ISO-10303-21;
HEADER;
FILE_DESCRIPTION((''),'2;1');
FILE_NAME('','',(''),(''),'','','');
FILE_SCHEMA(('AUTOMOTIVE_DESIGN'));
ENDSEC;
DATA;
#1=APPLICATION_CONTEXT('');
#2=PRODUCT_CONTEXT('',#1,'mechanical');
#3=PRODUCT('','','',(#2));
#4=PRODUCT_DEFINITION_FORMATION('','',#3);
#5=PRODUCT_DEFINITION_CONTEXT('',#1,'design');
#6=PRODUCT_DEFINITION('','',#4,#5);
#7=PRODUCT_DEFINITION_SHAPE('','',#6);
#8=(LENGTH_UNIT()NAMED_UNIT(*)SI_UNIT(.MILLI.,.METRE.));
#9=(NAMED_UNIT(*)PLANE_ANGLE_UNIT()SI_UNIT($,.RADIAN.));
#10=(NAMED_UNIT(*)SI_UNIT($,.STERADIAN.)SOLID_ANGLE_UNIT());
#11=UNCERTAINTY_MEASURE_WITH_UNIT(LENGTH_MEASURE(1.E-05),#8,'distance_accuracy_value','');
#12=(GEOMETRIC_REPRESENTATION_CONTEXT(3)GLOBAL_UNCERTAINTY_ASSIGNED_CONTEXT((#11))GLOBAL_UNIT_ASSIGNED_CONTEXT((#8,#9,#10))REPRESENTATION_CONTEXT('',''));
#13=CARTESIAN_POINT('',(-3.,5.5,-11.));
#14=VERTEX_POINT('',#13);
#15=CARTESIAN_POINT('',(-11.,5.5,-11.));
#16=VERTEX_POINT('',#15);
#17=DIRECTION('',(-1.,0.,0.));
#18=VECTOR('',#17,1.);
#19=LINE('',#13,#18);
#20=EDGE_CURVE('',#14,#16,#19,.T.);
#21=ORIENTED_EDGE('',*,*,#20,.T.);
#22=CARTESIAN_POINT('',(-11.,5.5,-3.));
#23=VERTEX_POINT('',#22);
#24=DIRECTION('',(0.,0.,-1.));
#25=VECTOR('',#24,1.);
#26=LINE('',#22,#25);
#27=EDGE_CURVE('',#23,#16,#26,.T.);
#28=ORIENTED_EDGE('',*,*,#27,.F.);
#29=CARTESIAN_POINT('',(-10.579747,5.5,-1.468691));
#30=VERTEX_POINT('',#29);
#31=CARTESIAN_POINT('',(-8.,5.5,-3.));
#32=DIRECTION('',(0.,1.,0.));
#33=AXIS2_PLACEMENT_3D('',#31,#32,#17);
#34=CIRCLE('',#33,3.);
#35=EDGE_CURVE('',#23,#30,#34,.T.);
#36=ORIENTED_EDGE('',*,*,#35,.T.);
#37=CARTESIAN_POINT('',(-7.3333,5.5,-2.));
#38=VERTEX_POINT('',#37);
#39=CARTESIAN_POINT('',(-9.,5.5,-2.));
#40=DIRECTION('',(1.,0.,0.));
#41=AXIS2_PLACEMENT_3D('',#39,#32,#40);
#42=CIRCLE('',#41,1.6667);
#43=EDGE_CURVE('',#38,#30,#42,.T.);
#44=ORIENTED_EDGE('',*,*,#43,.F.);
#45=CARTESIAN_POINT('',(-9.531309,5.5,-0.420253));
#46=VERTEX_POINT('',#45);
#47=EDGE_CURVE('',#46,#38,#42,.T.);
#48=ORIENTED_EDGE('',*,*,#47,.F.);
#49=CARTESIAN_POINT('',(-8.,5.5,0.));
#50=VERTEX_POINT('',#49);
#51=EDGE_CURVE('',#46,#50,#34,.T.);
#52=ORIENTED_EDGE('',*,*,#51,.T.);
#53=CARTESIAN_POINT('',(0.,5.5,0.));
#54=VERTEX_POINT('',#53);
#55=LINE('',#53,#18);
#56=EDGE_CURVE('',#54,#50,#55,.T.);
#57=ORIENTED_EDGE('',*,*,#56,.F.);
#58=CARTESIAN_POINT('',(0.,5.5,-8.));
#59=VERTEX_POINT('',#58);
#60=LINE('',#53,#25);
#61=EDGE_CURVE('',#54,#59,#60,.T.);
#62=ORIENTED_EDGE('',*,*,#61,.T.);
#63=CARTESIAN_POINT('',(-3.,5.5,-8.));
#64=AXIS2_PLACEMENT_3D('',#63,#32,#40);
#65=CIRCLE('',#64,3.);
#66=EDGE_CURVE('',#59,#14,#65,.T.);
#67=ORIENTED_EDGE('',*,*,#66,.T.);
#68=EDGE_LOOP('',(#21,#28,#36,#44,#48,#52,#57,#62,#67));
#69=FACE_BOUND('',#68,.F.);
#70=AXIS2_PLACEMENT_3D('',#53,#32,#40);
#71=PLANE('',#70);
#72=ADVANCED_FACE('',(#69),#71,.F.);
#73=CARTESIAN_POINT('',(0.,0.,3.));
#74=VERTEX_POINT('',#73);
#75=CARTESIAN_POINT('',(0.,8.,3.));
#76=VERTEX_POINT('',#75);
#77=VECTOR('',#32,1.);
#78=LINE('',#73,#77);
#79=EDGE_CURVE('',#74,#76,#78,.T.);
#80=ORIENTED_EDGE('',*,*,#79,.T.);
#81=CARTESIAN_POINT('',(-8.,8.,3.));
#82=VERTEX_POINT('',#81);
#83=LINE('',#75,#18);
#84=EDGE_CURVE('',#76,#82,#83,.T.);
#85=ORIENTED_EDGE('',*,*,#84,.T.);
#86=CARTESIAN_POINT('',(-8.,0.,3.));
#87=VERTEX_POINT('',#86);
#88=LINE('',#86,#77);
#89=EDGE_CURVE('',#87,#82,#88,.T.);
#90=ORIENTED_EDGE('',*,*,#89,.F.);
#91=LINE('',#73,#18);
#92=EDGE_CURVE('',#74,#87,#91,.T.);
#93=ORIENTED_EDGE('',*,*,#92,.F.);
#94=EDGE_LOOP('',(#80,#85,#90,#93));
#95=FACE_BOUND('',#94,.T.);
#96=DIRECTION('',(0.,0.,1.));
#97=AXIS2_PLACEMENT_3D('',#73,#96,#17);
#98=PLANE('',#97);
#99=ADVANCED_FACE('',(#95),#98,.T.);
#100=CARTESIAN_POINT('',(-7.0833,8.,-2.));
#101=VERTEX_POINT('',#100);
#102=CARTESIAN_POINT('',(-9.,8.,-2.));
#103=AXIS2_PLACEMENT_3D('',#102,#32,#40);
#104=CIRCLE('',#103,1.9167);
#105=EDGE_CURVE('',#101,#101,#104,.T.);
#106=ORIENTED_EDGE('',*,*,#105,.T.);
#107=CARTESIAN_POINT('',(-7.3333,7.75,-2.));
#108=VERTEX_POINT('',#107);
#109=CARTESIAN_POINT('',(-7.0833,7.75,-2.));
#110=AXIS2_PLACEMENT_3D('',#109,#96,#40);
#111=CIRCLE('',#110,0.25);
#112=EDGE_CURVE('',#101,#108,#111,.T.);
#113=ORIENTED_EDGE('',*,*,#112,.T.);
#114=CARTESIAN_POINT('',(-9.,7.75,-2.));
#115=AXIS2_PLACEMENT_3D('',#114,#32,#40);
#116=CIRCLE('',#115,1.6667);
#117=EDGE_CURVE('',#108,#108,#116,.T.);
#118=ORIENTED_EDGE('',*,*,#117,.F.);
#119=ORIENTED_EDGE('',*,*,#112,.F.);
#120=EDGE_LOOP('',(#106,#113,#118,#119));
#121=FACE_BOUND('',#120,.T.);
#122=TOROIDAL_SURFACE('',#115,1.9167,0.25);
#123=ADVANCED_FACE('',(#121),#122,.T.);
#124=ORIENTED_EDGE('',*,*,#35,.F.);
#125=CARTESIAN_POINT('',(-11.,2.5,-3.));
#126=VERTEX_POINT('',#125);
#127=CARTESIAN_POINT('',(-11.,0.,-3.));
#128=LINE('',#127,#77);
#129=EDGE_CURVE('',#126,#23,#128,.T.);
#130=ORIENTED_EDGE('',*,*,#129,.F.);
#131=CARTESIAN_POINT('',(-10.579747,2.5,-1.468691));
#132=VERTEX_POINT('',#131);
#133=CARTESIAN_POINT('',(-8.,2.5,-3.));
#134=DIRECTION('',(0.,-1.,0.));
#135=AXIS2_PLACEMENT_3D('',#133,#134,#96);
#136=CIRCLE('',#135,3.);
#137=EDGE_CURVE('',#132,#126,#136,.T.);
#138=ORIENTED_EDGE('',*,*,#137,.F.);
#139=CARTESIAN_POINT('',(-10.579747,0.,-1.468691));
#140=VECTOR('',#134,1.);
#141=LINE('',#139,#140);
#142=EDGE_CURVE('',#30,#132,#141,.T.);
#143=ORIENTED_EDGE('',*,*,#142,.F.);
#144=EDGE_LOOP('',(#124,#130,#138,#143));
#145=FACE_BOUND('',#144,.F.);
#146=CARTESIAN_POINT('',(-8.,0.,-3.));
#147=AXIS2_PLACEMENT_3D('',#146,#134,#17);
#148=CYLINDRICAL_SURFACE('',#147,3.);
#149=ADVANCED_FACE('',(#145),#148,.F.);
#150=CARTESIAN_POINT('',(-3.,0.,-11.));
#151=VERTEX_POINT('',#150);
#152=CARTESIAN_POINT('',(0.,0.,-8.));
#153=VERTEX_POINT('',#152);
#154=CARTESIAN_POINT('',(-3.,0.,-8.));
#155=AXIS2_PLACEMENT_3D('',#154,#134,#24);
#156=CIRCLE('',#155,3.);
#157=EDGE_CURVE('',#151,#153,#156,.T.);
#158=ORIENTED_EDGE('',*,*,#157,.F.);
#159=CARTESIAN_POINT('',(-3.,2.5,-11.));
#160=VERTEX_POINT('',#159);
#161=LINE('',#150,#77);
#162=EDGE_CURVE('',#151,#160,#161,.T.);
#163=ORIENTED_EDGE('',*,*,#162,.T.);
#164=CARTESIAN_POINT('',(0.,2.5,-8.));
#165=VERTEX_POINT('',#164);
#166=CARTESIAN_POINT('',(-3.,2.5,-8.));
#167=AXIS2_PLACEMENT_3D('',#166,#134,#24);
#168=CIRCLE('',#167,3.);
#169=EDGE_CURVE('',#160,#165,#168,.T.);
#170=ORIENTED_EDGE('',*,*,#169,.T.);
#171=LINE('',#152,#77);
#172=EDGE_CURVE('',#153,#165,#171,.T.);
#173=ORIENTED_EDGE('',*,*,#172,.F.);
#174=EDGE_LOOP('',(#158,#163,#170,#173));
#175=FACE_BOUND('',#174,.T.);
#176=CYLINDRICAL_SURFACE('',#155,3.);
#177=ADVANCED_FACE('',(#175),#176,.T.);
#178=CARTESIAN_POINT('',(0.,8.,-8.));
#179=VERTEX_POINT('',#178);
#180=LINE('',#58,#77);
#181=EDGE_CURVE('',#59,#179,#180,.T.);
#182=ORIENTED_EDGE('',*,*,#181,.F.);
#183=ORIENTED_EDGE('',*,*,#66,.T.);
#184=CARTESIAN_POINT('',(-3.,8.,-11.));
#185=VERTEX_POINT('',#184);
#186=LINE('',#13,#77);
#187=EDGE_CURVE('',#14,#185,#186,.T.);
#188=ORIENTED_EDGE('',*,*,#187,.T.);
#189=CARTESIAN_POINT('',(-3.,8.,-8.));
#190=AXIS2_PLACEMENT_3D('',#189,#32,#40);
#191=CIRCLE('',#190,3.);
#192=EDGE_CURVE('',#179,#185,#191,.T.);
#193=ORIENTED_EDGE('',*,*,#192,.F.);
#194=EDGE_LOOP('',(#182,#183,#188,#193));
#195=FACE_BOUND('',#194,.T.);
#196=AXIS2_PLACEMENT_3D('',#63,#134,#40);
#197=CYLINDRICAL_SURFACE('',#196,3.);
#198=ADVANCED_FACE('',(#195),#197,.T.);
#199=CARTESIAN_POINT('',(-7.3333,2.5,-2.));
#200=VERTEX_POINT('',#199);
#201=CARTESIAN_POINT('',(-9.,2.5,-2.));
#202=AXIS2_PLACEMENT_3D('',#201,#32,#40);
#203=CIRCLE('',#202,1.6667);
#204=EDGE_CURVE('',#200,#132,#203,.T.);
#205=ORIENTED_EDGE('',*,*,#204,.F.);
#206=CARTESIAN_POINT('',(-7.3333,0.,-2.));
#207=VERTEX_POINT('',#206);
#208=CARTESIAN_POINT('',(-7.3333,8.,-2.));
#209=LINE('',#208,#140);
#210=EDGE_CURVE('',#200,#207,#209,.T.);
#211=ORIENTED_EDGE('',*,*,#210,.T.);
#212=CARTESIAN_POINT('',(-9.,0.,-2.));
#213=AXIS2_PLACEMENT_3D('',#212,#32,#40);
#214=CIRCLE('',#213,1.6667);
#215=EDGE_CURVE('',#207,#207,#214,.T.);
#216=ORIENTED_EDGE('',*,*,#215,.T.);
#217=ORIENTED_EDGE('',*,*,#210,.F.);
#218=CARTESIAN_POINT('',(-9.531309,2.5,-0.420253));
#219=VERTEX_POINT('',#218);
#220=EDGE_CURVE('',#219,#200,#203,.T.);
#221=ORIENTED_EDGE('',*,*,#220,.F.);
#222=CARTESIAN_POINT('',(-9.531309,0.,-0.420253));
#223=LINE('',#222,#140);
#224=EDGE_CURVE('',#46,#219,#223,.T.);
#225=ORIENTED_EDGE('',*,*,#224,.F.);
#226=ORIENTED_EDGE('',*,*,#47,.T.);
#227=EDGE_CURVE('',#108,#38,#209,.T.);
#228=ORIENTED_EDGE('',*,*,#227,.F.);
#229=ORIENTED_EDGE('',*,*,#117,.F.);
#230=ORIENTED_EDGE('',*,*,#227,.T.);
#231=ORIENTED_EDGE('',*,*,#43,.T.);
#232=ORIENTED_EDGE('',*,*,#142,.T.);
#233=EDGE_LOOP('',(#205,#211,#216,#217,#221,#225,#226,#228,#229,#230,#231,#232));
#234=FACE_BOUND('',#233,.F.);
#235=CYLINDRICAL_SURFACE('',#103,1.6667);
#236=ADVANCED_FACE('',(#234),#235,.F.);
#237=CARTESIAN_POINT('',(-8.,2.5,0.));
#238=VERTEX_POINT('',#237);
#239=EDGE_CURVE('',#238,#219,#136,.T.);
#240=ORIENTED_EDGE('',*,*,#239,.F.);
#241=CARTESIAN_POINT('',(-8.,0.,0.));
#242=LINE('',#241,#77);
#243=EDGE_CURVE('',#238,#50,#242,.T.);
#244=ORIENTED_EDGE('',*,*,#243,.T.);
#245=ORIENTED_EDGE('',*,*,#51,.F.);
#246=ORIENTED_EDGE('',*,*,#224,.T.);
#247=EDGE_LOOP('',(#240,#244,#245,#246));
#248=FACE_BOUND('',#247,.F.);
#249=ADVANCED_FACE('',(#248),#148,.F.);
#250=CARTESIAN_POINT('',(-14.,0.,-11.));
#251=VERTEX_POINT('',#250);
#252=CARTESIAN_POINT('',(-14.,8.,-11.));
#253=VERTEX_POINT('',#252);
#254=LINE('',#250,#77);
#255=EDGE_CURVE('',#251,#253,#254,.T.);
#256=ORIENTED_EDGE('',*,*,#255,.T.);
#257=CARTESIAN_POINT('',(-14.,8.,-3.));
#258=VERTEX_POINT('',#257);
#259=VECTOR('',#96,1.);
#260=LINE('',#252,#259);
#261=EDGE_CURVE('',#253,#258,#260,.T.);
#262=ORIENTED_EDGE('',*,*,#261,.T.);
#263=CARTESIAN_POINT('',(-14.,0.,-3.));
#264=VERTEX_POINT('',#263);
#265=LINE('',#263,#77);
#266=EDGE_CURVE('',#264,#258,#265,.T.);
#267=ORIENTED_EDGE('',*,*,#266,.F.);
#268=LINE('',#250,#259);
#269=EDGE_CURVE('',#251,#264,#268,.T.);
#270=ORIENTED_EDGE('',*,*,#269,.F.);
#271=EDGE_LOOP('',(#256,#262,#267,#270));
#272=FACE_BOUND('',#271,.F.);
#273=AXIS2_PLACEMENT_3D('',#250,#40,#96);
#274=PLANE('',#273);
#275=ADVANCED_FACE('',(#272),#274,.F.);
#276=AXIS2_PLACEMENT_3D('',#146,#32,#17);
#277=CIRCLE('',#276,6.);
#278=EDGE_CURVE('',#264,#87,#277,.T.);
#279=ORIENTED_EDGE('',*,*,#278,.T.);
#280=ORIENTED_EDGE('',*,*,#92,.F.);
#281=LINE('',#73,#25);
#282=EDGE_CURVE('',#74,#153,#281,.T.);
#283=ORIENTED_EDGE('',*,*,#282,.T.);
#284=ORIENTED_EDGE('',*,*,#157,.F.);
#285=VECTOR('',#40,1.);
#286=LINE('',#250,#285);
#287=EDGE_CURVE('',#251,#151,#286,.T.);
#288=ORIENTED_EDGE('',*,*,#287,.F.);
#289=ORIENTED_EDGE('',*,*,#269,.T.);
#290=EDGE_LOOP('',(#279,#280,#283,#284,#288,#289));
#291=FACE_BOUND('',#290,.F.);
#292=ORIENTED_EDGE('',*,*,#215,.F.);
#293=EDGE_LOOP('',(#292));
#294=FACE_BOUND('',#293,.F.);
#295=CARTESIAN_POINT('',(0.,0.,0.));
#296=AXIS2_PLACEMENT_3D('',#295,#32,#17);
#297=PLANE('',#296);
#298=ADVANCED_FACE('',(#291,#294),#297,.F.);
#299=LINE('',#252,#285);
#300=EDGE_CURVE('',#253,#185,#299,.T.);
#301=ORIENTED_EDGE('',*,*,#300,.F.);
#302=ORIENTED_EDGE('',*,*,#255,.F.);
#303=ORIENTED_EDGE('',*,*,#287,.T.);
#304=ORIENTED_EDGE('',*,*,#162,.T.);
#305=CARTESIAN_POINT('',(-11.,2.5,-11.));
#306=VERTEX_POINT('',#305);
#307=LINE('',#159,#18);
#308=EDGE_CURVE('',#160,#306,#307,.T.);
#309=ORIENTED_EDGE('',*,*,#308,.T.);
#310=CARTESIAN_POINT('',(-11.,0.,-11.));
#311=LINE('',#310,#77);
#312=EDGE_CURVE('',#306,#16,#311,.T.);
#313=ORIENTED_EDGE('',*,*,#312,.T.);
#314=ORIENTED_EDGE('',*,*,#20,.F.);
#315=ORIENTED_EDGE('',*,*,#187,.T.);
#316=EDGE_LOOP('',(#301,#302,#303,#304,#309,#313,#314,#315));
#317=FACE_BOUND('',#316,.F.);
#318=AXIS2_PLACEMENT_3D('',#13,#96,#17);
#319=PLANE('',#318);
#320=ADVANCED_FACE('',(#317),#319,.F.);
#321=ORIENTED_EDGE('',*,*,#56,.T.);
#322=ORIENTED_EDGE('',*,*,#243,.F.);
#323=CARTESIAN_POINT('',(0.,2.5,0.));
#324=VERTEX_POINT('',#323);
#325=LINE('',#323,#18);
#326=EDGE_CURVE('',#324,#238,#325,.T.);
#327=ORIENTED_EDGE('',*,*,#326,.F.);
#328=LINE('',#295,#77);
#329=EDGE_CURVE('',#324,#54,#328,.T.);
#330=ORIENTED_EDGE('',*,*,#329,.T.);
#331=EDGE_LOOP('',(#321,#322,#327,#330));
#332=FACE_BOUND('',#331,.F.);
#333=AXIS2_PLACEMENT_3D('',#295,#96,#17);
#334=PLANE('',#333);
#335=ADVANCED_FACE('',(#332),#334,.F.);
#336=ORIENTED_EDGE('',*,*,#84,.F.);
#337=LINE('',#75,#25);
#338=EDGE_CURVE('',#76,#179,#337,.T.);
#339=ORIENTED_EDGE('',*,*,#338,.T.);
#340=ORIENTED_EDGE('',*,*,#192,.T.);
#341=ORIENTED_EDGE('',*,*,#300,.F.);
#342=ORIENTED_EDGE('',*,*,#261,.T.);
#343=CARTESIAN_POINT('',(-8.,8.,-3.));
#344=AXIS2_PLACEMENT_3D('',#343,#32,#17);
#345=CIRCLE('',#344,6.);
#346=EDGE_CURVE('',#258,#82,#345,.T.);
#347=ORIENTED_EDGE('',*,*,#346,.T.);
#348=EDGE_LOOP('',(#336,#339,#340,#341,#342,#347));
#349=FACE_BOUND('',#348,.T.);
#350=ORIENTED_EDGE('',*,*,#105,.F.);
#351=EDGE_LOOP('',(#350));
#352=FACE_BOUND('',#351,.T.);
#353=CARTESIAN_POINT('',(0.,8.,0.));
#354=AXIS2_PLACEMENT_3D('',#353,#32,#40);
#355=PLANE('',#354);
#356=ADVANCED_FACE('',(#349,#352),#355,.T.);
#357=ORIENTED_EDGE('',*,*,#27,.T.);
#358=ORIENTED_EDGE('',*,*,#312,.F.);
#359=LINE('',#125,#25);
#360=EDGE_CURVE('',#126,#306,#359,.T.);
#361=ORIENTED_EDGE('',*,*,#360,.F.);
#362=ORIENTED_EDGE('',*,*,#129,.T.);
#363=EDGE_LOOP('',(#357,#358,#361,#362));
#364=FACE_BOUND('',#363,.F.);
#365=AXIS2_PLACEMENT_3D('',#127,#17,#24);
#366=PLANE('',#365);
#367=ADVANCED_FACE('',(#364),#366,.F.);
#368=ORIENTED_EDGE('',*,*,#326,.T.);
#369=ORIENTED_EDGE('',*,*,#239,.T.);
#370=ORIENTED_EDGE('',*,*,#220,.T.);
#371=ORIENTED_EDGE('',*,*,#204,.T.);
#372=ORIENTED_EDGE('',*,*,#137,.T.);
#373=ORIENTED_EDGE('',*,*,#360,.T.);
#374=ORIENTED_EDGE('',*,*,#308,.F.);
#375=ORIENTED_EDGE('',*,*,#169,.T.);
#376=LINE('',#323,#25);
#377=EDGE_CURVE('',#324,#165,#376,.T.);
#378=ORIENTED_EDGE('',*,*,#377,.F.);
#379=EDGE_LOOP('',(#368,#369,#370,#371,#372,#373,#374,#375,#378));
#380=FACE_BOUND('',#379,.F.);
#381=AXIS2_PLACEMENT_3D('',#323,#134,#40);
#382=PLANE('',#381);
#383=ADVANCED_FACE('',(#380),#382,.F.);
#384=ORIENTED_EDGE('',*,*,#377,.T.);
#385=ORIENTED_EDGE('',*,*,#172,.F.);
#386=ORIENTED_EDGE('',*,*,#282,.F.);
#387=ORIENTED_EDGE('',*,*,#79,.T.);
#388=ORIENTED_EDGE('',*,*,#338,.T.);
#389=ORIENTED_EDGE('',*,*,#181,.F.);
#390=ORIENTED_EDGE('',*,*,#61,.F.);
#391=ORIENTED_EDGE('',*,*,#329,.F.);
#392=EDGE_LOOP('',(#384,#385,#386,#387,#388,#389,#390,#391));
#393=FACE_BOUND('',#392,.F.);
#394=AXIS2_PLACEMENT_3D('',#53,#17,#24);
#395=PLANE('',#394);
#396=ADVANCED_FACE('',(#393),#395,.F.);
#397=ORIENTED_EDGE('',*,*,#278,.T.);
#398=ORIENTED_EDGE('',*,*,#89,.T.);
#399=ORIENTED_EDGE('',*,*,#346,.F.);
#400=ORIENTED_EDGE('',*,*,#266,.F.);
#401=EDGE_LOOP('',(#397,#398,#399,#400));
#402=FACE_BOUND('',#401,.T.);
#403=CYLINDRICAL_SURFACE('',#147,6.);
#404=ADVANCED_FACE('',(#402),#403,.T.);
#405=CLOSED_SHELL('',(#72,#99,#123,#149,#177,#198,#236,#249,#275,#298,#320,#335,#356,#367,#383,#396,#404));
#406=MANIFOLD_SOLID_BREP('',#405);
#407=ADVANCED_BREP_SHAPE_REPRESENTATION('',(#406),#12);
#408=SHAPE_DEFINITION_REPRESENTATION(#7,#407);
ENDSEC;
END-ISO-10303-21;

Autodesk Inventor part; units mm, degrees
ref_plane "YZ Plane" through (0, 0, 0) normal (1, 0, 0) x (0, 1, 0)
ref_plane "XZ Plane" through (0, 0, 0) normal (0, 1, 0) x (-1, 0, 0)
sketch "Sketch1" plane through (0, 0, 0) normal (0, 1, 0) x (-1, 0, 0)
  line L0 (0, 0) -> (8, 0)
  line L1 (0, 0) -> (0, 3)
  line L2 (0, 3) -> (8, 3)
  arc A0 (11, -3) -> (8, 0) centre (8, -3) ccw
  arc A1 (14, -3) -> (8, 3) centre (8, -3) ccw
  line L3 (11, -3) -> (11, -11)
  line L4 (11, -11) -> (14, -11)
  line L5 (14, -11) -> (14, -3)
  line L6 (0, 0) -> (11, -11)
  dimension "d0" = 3
  dimension "d1" = 3
  dimension "d2" = 8
  dimension "d3" = 3
  dimension "d4" = 8
extrude "Extrusion1" add sketch "Sketch1" along normal blind 8 contours L1 L2 A1 L5 L4 L3 A0 L0
sketch "Sketch2" plane through (0, 0, 0) normal (0, -1, 0) x (1, 0, 0)
  line L0 (0, 0) -> (-8, 0) projected
  arc A0 (-8, 0) -> (-11, -3) centre (-8, -3) ccw projected
  line L1 (-11, -3) -> (-11, -11) projected
  line L2 (0, 0) -> (-11, -11)
  line L3 (-11, -11) -> (-11, -3)
  line L4 (-8, 0) -> (0, 0)
  arc A1 (-8, 0) -> (-11, -3) centre (-8, -3) ccw
  line L5 (0, 0) -> (0, -8)
  arc A2 (-3, -11) -> (0, -8) centre (-3, -8) ccw
  line L6 (-3, -11) -> (-11, -11)
extrude "Extrusion2" add sketch "Sketch2" against normal blind 2.5
ref_plane "Work Plane1" through (0, 5.5, 0) normal (0, 1, 0) x (1, 0, 0)
sketch "Sketch3" plane through (0, 5.5, 0) normal (0, 1, 0) x (1, 0, 0)
  line L0 (0, 0) -> (0, 8) projected
  arc A0 (0, 8) -> (-3, 11) centre (-3, 8) ccw projected
  line L1 (-3, 11) -> (-11, 11) projected
  line L2 (-11, 3) -> (-11, 11) projected
  arc A1 (-11, 3) -> (-8, 0) centre (-8, 3) ccw projected
  line L3 (0, 0) -> (-8, 0) projected
extrude "Extrusion3" add sketch "Sketch3" along normal blind 2.5
sketch "Sketch4" plane through (0, 8, 0) normal (0, 1, 0) x (1, 0, 0)
  arc A0 (0, 8) -> (-3, 11) centre (-3, 8) ccw projected
  line L0 (0, -3) -> (0, 8) projected
  line L1 (-3, 11) -> (-14, 11) projected
  line L2 (-14, 11) -> (-14, 3) projected
  arc A1 (-14, 3) -> (-8, -3) centre (-8, 3) ccw projected
  line L3 (-8, -3) -> (0, -3) projected
  point P0 (0, 0)
sketch "Sketch5" plane through (0, 8, 0) normal (0, 1, 0) x (1, 0, 0)
  circle A0 centre (-9, 2) radius 1.6667
  line L0 (-8, -3) -> (0, -3) projected
  line L1 (-14, 11) -> (-14, 3) projected
  point P0 (0, 0)
  dimension "d21" = 3.3333
  dimension "d22" = 3.3333
  dimension "d23" = 3.3333
extrude "Extrusion4" cut sketch "Sketch5" against normal through all
fillet "Fillet2" radius 0.25 1 edges at (-10.6667, 8, -2)
equation "\"d23\" = d22"
properties part number "Plate Adapter 4.0"
